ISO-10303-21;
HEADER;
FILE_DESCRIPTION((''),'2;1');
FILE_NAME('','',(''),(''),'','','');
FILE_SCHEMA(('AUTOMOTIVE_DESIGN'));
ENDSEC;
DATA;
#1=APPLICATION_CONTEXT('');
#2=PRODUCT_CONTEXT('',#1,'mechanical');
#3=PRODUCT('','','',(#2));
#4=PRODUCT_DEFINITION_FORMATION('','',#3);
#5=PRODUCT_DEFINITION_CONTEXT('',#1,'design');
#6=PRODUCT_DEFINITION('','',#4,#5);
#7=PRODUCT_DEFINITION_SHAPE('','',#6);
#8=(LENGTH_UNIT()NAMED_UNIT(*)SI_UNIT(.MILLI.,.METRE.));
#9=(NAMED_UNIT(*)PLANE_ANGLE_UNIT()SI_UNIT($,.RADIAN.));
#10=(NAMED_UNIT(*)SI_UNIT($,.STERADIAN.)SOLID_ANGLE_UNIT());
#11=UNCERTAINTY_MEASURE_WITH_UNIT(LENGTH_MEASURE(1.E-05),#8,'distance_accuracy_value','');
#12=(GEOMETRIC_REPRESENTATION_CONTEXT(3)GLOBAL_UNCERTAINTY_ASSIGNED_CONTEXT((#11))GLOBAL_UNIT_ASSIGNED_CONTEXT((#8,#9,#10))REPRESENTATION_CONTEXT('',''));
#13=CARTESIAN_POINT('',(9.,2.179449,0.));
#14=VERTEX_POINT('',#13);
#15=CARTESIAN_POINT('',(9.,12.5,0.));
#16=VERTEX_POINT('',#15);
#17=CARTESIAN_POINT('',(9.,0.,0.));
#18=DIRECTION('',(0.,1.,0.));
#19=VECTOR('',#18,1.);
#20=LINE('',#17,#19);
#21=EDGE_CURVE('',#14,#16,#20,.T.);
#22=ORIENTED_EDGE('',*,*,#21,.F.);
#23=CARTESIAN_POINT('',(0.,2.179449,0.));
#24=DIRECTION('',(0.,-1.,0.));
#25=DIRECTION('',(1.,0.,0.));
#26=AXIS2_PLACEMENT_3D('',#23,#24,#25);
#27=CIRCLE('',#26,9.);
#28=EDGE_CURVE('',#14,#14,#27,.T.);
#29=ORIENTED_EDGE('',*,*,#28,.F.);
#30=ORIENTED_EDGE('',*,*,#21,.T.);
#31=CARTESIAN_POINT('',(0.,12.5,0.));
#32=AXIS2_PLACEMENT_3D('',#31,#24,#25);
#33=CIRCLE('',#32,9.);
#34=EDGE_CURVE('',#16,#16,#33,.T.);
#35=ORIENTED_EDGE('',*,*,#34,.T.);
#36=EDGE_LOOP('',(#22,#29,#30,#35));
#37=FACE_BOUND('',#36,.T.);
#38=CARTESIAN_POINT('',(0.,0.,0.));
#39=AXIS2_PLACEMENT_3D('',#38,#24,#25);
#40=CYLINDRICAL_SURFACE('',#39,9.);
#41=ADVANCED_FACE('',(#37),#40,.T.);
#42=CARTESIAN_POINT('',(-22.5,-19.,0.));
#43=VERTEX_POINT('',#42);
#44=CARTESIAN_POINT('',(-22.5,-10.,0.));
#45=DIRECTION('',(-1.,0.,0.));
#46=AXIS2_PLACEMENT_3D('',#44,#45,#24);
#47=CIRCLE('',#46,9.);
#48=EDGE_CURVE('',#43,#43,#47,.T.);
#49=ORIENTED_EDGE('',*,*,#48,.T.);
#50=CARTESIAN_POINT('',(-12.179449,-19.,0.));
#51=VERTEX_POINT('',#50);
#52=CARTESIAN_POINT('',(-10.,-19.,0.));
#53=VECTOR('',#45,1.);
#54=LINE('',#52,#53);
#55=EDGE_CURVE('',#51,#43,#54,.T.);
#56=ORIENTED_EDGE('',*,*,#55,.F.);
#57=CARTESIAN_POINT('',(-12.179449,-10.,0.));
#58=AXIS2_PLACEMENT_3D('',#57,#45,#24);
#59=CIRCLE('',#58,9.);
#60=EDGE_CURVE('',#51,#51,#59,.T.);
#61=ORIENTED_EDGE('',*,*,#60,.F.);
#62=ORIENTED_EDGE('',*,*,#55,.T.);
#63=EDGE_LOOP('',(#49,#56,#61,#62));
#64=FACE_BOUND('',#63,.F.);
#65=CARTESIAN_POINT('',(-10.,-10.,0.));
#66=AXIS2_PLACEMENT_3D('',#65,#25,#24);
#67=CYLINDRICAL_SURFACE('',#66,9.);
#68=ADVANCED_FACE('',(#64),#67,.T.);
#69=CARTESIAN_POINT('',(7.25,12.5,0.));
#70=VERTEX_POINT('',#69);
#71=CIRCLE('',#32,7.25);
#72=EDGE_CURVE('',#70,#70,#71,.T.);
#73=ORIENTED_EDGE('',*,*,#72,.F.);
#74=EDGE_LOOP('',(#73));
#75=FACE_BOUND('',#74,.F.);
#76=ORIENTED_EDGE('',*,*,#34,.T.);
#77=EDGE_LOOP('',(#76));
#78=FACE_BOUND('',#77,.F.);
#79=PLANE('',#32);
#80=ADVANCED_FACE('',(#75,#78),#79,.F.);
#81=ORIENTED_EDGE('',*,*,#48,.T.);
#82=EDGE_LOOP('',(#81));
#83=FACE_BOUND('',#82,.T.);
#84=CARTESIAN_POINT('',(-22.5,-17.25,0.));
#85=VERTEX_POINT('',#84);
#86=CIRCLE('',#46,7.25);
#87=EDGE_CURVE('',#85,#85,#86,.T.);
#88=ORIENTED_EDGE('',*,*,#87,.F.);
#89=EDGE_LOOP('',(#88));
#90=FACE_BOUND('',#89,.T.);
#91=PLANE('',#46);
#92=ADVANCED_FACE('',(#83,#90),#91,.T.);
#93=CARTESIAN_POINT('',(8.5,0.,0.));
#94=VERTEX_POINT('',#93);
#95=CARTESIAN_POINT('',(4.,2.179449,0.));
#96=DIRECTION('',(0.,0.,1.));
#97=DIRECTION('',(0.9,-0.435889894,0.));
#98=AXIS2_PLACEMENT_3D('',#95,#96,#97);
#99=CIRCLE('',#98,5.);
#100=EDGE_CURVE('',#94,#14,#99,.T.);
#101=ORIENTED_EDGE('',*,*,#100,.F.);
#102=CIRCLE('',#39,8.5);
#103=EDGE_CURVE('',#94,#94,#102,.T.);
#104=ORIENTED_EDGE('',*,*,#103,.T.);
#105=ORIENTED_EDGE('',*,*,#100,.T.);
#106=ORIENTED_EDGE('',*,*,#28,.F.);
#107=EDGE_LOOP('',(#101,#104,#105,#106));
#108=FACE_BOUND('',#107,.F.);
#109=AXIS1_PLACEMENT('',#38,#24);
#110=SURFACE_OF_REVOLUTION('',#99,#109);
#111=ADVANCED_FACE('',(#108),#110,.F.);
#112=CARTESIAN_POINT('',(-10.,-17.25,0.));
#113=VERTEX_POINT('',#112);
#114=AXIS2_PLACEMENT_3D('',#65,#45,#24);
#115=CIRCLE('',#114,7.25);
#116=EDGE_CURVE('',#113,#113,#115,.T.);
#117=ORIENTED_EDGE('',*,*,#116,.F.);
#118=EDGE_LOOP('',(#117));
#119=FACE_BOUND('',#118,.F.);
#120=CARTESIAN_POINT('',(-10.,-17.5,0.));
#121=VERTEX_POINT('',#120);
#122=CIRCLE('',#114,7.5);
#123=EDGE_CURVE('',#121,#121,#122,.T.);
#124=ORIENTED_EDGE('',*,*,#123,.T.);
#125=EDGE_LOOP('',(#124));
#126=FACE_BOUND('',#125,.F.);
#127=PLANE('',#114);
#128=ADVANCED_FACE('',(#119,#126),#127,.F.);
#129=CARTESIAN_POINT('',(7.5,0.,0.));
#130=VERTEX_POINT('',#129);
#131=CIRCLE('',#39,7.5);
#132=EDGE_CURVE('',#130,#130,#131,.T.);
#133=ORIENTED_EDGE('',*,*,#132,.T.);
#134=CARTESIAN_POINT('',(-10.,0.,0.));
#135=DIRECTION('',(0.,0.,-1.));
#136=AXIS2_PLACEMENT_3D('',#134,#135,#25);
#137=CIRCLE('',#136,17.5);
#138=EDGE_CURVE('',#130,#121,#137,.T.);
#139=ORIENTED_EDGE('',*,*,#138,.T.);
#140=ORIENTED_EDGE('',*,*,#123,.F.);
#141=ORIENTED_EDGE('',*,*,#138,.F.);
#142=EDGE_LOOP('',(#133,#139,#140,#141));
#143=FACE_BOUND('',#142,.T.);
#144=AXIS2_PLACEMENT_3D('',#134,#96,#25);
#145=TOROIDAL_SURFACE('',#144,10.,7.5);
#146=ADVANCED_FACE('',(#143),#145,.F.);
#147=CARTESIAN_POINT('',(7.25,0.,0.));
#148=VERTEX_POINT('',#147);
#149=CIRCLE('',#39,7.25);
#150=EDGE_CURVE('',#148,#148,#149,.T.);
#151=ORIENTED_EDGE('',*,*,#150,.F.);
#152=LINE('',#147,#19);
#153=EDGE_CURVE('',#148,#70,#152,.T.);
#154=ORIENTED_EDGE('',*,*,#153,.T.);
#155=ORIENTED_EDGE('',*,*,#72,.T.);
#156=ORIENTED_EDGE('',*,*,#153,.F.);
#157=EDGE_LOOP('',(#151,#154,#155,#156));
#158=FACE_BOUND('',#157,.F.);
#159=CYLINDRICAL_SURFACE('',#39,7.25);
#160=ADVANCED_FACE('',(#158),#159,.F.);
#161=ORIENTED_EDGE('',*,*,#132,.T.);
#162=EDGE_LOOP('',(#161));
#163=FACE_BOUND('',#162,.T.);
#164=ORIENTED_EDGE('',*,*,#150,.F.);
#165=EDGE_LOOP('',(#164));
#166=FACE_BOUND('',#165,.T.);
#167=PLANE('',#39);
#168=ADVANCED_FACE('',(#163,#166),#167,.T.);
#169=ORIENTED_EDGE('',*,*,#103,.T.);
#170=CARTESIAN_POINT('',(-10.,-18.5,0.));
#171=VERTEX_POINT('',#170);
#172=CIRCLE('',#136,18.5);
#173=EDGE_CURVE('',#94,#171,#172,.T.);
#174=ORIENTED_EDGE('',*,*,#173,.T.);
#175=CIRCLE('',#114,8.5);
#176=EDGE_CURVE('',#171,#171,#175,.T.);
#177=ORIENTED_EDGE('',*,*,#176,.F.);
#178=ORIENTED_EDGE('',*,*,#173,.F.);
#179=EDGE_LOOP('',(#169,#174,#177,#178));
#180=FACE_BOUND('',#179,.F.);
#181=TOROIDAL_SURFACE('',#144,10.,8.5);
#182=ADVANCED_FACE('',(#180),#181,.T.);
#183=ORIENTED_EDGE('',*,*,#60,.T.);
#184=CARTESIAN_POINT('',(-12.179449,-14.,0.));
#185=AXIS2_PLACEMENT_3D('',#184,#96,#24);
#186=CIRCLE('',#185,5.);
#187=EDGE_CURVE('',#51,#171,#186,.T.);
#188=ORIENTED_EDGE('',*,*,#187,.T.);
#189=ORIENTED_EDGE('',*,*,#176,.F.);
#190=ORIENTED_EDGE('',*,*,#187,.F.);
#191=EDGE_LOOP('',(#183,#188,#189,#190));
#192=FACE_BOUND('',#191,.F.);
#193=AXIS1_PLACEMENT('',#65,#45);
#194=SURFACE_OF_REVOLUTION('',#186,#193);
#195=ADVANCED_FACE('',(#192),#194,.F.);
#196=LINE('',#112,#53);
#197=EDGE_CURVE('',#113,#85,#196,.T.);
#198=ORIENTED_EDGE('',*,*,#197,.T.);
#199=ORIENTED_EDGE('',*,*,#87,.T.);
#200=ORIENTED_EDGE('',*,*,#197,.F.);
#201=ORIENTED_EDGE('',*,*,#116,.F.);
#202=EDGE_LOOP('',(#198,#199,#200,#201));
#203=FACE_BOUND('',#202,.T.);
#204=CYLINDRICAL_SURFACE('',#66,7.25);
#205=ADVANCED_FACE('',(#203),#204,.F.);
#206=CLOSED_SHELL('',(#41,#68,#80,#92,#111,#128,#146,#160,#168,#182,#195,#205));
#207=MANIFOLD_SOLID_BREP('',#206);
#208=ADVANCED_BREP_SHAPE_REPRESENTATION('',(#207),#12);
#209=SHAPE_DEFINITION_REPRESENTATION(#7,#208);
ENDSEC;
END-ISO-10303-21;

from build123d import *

# Parameters (mm, degrees)
F0_R     = 8.5
F0_R_2   = 7.5
F1_ANGLE = 90
F2_R     = 9
F2_R_2   = 7.25
F3_DEPTH = 12.5
F4_R     = 9
F4_R_2   = 7.25
F5_DEPTH = 12.5


# Not quite as in the source:
# - a fillet or chamfer that OpenCascade refuses, or shapes differently, is made with other operations: its cross-section is extruded or revolved along the edge and cut away or added


with BuildPart() as f1:
    # F0 (on Front) → F1 (revolve)
    with BuildSketch(Plane.XZ):
        Circle(F0_R)
        Circle(F0_R_2, mode=Mode.SUBTRACT)
    revolve(axis=Axis((-10, 0, 0.1811354887), (0, 0, -1)), revolution_arc=F1_ANGLE)

    # F2 (on Front) → F3 (join)
    with BuildSketch(Plane.XZ):
        Circle(F2_R)
        Circle(F2_R_2, mode=Mode.SUBTRACT)
    extrude(amount=-F3_DEPTH)

    # F4 (on face) → F5 (join)
    with BuildSketch(Plane(origin=(-10, 0, 0), x_dir=(0, -1, 0), z_dir=(-1, 0, 0))):
        with Locations((10, 0)):
            Circle(F4_R)
        with Locations((10, 0)):
            Circle(F4_R_2, mode=Mode.SUBTRACT)
    extrude(amount=F5_DEPTH)

    # F6: fillet of radius 5 on 2 edges, made by hand

    # F6_s1 → F6_t2 (revolve, cut)
    with BuildSketch(Plane.XY):
        with BuildLine():
            ThreePointArc((-12.1794494718, -19), (-11.061415483, -18.8733971724), (-10, -18.5))
            Line((-10, -18.5), (-10, -19))
            Line((-10, -19), (-12.1794494718, -19))
        make_face()
    revolve(axis=Axis((-10, -10, 0), (-1, 0, 0)), mode=Mode.SUBTRACT)

    # F6_s3 → F6_t4 (revolve, cut)
    with BuildSketch(Plane.XY):
        with BuildLine():
            ThreePointArc((8.5, 0), (8.8733971724, 1.061415483), (9, 2.1794494718))
            Line((9, 2.1794494718), (9, 0))
            Line((9, 0), (8.5, 0))
        make_face()
    revolve(axis=Axis((0, 0, 0), (0, -1, 0)), mode=Mode.SUBTRACT)


solid = f1.part
